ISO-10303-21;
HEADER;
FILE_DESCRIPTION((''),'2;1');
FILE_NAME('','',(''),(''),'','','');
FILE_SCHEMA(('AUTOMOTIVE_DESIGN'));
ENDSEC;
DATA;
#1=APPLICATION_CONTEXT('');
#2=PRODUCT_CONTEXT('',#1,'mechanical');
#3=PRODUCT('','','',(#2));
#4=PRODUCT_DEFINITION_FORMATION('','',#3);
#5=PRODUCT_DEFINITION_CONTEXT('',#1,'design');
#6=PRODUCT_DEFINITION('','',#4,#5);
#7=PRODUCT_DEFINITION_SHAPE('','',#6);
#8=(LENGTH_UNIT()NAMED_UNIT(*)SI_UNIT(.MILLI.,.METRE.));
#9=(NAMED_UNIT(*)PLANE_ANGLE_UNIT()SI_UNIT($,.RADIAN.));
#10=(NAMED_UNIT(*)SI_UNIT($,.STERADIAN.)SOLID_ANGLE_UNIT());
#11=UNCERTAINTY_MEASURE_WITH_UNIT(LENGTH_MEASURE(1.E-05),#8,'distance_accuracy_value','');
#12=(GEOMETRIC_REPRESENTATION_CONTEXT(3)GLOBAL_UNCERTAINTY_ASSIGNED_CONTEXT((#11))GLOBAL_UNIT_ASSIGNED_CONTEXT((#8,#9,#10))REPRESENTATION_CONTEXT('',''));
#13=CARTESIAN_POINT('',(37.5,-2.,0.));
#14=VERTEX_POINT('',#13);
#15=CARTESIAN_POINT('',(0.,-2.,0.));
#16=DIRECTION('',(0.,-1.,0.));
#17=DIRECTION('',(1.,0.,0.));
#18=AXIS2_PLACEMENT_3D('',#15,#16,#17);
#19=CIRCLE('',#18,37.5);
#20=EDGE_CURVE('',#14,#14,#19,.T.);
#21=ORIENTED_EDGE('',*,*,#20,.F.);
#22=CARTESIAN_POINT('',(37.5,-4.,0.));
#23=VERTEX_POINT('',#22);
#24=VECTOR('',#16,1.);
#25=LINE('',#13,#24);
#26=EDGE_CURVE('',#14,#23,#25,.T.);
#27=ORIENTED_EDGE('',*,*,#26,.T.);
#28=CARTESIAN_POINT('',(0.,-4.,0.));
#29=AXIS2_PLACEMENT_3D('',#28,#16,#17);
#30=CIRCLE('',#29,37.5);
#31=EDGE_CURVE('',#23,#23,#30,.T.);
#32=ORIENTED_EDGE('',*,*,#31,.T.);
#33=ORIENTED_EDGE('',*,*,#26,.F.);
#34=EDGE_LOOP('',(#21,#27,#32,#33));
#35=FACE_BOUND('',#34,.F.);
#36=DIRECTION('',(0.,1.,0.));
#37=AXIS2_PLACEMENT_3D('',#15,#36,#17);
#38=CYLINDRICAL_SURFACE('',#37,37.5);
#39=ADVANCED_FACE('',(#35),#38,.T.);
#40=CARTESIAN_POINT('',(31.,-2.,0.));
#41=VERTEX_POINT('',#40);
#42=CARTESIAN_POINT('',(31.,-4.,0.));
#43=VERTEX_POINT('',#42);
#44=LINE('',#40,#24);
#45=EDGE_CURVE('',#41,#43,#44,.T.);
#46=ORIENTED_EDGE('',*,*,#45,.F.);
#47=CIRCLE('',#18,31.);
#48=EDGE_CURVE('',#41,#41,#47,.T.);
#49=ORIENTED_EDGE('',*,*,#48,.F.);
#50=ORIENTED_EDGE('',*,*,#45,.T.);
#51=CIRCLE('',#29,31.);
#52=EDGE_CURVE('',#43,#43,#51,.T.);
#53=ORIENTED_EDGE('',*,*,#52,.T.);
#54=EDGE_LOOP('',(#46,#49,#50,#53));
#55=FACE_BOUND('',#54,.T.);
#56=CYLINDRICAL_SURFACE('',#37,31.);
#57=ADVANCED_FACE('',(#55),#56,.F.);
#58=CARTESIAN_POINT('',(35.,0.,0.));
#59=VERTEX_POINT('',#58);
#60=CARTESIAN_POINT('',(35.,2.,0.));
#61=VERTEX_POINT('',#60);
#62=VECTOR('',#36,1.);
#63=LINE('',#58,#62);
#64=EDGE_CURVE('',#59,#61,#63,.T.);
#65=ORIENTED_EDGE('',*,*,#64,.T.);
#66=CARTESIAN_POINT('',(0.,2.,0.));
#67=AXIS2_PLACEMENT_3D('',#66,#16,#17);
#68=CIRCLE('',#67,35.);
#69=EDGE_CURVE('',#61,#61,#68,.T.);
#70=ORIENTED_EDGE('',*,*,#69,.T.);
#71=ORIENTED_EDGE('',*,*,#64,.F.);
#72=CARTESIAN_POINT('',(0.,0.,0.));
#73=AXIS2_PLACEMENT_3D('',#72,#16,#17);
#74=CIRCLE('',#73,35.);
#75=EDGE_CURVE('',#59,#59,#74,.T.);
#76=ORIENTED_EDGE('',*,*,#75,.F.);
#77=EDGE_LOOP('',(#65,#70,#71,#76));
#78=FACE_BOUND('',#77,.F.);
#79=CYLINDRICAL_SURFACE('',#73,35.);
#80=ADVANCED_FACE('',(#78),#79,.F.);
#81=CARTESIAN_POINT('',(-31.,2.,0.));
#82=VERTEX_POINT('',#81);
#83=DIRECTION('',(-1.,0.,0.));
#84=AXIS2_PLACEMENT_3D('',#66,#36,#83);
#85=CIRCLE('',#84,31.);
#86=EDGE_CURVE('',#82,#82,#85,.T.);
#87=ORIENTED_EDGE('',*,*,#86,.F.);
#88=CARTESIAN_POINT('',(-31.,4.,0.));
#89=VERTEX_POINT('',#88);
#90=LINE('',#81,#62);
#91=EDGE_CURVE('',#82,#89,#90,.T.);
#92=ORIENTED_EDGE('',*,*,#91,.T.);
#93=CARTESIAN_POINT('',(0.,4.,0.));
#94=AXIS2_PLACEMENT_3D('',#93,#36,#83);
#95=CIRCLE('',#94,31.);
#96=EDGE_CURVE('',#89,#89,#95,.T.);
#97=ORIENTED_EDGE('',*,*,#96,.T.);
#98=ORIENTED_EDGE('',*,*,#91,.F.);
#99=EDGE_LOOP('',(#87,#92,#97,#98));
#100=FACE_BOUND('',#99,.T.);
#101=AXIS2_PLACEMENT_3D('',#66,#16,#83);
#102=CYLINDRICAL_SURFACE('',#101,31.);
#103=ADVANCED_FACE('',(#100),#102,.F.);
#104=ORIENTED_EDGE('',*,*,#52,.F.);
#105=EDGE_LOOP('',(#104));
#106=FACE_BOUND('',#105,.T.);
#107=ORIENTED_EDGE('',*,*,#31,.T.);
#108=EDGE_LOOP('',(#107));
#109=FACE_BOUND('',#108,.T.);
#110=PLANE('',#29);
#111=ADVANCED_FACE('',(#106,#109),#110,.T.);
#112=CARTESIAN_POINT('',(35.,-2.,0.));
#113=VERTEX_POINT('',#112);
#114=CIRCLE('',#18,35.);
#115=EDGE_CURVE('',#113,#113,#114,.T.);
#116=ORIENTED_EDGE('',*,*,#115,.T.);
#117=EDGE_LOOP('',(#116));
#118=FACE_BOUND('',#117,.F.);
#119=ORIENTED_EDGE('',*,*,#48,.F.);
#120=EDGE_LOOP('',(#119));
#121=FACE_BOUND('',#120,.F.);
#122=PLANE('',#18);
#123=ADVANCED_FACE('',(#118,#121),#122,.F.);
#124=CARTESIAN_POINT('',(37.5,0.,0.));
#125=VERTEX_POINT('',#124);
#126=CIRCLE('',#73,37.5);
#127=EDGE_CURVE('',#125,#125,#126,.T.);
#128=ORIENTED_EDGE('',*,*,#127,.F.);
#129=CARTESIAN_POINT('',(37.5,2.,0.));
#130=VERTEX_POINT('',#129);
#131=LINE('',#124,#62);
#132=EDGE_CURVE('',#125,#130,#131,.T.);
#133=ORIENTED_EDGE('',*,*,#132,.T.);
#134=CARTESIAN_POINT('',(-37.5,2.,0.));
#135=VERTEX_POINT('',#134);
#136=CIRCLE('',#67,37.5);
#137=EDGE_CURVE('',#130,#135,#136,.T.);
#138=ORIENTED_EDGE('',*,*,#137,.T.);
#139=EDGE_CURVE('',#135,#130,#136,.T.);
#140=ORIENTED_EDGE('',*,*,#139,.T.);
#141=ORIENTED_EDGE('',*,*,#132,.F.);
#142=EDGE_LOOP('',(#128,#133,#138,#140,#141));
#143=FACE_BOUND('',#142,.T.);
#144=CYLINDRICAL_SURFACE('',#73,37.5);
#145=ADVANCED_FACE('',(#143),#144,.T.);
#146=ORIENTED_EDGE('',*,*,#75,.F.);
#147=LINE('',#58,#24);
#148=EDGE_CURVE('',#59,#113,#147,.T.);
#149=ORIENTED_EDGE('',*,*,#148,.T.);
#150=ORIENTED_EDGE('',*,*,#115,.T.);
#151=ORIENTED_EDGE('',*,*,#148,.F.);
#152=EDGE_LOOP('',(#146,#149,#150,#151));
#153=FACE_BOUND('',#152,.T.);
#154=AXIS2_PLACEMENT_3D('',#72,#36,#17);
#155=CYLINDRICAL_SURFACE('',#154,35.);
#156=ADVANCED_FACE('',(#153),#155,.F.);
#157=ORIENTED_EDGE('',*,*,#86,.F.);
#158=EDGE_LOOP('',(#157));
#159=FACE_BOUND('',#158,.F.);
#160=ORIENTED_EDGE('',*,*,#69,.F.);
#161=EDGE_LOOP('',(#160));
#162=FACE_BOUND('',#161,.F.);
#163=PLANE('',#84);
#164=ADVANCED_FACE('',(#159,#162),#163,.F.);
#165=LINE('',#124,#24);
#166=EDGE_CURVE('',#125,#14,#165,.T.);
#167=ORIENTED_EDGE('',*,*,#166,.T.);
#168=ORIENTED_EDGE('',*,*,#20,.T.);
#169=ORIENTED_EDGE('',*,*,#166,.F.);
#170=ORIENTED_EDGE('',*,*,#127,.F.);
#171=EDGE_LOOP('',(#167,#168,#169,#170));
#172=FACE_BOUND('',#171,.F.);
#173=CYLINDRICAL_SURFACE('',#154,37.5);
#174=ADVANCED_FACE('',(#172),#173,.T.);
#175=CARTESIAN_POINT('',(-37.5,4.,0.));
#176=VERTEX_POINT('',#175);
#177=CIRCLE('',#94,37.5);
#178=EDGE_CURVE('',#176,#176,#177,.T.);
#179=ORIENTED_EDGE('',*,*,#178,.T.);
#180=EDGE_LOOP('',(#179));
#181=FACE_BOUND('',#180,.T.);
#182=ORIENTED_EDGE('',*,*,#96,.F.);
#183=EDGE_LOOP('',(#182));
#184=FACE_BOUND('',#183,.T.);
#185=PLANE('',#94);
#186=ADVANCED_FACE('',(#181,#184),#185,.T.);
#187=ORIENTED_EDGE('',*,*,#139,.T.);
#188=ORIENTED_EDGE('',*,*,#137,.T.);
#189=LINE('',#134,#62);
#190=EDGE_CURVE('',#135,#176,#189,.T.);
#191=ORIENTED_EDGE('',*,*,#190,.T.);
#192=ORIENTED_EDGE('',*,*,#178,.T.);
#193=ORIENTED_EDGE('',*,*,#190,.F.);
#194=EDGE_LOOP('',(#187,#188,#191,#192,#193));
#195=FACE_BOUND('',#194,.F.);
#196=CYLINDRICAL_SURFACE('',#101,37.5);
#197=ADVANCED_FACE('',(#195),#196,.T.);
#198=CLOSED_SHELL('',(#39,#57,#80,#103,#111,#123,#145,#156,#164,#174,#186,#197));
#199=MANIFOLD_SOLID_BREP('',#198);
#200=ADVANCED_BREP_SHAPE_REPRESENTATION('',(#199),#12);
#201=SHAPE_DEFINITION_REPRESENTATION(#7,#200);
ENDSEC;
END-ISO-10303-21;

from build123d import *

# Parameters (mm, degrees)
F0_R          = 37.5
F0_R_2        = 35
F1_DEPTH      = 2
F1_DEPTH_BACK = 2
F2_R          = 37.5
F2_R_2        = 31
F3_DEPTH      = 2
F4_R          = 37.5
F4_R_2        = 31
F5_DEPTH      = 2


# Not quite as in the source:
# - a feature names something its author has since deleted; it is built from what else it names


with BuildPart() as f1:
    # F0 (on Front) → F1 (new body, two sides)
    with BuildSketch(Plane.XZ) as f1_sk:
        Circle(F0_R)
        Circle(F0_R_2, mode=Mode.SUBTRACT)
    extrude(amount=-F1_DEPTH)
    extrude(f1_sk.sketch, amount=F1_DEPTH_BACK)

    # F2 (on face) → F3 (join)
    with BuildSketch(Plane.XZ.offset(2)):
        Circle(F2_R)
        Circle(F2_R_2, mode=Mode.SUBTRACT)
    extrude(amount=F3_DEPTH)

    # F4 (on face) → F5 (join)
    with BuildSketch(Plane(origin=(0, 2, 0), x_dir=(-1, 0, 0), z_dir=(0, 1, 0))):
        Circle(F4_R)
        Circle(F4_R_2, mode=Mode.SUBTRACT)
    extrude(amount=F5_DEPTH)


solid = f1.part
